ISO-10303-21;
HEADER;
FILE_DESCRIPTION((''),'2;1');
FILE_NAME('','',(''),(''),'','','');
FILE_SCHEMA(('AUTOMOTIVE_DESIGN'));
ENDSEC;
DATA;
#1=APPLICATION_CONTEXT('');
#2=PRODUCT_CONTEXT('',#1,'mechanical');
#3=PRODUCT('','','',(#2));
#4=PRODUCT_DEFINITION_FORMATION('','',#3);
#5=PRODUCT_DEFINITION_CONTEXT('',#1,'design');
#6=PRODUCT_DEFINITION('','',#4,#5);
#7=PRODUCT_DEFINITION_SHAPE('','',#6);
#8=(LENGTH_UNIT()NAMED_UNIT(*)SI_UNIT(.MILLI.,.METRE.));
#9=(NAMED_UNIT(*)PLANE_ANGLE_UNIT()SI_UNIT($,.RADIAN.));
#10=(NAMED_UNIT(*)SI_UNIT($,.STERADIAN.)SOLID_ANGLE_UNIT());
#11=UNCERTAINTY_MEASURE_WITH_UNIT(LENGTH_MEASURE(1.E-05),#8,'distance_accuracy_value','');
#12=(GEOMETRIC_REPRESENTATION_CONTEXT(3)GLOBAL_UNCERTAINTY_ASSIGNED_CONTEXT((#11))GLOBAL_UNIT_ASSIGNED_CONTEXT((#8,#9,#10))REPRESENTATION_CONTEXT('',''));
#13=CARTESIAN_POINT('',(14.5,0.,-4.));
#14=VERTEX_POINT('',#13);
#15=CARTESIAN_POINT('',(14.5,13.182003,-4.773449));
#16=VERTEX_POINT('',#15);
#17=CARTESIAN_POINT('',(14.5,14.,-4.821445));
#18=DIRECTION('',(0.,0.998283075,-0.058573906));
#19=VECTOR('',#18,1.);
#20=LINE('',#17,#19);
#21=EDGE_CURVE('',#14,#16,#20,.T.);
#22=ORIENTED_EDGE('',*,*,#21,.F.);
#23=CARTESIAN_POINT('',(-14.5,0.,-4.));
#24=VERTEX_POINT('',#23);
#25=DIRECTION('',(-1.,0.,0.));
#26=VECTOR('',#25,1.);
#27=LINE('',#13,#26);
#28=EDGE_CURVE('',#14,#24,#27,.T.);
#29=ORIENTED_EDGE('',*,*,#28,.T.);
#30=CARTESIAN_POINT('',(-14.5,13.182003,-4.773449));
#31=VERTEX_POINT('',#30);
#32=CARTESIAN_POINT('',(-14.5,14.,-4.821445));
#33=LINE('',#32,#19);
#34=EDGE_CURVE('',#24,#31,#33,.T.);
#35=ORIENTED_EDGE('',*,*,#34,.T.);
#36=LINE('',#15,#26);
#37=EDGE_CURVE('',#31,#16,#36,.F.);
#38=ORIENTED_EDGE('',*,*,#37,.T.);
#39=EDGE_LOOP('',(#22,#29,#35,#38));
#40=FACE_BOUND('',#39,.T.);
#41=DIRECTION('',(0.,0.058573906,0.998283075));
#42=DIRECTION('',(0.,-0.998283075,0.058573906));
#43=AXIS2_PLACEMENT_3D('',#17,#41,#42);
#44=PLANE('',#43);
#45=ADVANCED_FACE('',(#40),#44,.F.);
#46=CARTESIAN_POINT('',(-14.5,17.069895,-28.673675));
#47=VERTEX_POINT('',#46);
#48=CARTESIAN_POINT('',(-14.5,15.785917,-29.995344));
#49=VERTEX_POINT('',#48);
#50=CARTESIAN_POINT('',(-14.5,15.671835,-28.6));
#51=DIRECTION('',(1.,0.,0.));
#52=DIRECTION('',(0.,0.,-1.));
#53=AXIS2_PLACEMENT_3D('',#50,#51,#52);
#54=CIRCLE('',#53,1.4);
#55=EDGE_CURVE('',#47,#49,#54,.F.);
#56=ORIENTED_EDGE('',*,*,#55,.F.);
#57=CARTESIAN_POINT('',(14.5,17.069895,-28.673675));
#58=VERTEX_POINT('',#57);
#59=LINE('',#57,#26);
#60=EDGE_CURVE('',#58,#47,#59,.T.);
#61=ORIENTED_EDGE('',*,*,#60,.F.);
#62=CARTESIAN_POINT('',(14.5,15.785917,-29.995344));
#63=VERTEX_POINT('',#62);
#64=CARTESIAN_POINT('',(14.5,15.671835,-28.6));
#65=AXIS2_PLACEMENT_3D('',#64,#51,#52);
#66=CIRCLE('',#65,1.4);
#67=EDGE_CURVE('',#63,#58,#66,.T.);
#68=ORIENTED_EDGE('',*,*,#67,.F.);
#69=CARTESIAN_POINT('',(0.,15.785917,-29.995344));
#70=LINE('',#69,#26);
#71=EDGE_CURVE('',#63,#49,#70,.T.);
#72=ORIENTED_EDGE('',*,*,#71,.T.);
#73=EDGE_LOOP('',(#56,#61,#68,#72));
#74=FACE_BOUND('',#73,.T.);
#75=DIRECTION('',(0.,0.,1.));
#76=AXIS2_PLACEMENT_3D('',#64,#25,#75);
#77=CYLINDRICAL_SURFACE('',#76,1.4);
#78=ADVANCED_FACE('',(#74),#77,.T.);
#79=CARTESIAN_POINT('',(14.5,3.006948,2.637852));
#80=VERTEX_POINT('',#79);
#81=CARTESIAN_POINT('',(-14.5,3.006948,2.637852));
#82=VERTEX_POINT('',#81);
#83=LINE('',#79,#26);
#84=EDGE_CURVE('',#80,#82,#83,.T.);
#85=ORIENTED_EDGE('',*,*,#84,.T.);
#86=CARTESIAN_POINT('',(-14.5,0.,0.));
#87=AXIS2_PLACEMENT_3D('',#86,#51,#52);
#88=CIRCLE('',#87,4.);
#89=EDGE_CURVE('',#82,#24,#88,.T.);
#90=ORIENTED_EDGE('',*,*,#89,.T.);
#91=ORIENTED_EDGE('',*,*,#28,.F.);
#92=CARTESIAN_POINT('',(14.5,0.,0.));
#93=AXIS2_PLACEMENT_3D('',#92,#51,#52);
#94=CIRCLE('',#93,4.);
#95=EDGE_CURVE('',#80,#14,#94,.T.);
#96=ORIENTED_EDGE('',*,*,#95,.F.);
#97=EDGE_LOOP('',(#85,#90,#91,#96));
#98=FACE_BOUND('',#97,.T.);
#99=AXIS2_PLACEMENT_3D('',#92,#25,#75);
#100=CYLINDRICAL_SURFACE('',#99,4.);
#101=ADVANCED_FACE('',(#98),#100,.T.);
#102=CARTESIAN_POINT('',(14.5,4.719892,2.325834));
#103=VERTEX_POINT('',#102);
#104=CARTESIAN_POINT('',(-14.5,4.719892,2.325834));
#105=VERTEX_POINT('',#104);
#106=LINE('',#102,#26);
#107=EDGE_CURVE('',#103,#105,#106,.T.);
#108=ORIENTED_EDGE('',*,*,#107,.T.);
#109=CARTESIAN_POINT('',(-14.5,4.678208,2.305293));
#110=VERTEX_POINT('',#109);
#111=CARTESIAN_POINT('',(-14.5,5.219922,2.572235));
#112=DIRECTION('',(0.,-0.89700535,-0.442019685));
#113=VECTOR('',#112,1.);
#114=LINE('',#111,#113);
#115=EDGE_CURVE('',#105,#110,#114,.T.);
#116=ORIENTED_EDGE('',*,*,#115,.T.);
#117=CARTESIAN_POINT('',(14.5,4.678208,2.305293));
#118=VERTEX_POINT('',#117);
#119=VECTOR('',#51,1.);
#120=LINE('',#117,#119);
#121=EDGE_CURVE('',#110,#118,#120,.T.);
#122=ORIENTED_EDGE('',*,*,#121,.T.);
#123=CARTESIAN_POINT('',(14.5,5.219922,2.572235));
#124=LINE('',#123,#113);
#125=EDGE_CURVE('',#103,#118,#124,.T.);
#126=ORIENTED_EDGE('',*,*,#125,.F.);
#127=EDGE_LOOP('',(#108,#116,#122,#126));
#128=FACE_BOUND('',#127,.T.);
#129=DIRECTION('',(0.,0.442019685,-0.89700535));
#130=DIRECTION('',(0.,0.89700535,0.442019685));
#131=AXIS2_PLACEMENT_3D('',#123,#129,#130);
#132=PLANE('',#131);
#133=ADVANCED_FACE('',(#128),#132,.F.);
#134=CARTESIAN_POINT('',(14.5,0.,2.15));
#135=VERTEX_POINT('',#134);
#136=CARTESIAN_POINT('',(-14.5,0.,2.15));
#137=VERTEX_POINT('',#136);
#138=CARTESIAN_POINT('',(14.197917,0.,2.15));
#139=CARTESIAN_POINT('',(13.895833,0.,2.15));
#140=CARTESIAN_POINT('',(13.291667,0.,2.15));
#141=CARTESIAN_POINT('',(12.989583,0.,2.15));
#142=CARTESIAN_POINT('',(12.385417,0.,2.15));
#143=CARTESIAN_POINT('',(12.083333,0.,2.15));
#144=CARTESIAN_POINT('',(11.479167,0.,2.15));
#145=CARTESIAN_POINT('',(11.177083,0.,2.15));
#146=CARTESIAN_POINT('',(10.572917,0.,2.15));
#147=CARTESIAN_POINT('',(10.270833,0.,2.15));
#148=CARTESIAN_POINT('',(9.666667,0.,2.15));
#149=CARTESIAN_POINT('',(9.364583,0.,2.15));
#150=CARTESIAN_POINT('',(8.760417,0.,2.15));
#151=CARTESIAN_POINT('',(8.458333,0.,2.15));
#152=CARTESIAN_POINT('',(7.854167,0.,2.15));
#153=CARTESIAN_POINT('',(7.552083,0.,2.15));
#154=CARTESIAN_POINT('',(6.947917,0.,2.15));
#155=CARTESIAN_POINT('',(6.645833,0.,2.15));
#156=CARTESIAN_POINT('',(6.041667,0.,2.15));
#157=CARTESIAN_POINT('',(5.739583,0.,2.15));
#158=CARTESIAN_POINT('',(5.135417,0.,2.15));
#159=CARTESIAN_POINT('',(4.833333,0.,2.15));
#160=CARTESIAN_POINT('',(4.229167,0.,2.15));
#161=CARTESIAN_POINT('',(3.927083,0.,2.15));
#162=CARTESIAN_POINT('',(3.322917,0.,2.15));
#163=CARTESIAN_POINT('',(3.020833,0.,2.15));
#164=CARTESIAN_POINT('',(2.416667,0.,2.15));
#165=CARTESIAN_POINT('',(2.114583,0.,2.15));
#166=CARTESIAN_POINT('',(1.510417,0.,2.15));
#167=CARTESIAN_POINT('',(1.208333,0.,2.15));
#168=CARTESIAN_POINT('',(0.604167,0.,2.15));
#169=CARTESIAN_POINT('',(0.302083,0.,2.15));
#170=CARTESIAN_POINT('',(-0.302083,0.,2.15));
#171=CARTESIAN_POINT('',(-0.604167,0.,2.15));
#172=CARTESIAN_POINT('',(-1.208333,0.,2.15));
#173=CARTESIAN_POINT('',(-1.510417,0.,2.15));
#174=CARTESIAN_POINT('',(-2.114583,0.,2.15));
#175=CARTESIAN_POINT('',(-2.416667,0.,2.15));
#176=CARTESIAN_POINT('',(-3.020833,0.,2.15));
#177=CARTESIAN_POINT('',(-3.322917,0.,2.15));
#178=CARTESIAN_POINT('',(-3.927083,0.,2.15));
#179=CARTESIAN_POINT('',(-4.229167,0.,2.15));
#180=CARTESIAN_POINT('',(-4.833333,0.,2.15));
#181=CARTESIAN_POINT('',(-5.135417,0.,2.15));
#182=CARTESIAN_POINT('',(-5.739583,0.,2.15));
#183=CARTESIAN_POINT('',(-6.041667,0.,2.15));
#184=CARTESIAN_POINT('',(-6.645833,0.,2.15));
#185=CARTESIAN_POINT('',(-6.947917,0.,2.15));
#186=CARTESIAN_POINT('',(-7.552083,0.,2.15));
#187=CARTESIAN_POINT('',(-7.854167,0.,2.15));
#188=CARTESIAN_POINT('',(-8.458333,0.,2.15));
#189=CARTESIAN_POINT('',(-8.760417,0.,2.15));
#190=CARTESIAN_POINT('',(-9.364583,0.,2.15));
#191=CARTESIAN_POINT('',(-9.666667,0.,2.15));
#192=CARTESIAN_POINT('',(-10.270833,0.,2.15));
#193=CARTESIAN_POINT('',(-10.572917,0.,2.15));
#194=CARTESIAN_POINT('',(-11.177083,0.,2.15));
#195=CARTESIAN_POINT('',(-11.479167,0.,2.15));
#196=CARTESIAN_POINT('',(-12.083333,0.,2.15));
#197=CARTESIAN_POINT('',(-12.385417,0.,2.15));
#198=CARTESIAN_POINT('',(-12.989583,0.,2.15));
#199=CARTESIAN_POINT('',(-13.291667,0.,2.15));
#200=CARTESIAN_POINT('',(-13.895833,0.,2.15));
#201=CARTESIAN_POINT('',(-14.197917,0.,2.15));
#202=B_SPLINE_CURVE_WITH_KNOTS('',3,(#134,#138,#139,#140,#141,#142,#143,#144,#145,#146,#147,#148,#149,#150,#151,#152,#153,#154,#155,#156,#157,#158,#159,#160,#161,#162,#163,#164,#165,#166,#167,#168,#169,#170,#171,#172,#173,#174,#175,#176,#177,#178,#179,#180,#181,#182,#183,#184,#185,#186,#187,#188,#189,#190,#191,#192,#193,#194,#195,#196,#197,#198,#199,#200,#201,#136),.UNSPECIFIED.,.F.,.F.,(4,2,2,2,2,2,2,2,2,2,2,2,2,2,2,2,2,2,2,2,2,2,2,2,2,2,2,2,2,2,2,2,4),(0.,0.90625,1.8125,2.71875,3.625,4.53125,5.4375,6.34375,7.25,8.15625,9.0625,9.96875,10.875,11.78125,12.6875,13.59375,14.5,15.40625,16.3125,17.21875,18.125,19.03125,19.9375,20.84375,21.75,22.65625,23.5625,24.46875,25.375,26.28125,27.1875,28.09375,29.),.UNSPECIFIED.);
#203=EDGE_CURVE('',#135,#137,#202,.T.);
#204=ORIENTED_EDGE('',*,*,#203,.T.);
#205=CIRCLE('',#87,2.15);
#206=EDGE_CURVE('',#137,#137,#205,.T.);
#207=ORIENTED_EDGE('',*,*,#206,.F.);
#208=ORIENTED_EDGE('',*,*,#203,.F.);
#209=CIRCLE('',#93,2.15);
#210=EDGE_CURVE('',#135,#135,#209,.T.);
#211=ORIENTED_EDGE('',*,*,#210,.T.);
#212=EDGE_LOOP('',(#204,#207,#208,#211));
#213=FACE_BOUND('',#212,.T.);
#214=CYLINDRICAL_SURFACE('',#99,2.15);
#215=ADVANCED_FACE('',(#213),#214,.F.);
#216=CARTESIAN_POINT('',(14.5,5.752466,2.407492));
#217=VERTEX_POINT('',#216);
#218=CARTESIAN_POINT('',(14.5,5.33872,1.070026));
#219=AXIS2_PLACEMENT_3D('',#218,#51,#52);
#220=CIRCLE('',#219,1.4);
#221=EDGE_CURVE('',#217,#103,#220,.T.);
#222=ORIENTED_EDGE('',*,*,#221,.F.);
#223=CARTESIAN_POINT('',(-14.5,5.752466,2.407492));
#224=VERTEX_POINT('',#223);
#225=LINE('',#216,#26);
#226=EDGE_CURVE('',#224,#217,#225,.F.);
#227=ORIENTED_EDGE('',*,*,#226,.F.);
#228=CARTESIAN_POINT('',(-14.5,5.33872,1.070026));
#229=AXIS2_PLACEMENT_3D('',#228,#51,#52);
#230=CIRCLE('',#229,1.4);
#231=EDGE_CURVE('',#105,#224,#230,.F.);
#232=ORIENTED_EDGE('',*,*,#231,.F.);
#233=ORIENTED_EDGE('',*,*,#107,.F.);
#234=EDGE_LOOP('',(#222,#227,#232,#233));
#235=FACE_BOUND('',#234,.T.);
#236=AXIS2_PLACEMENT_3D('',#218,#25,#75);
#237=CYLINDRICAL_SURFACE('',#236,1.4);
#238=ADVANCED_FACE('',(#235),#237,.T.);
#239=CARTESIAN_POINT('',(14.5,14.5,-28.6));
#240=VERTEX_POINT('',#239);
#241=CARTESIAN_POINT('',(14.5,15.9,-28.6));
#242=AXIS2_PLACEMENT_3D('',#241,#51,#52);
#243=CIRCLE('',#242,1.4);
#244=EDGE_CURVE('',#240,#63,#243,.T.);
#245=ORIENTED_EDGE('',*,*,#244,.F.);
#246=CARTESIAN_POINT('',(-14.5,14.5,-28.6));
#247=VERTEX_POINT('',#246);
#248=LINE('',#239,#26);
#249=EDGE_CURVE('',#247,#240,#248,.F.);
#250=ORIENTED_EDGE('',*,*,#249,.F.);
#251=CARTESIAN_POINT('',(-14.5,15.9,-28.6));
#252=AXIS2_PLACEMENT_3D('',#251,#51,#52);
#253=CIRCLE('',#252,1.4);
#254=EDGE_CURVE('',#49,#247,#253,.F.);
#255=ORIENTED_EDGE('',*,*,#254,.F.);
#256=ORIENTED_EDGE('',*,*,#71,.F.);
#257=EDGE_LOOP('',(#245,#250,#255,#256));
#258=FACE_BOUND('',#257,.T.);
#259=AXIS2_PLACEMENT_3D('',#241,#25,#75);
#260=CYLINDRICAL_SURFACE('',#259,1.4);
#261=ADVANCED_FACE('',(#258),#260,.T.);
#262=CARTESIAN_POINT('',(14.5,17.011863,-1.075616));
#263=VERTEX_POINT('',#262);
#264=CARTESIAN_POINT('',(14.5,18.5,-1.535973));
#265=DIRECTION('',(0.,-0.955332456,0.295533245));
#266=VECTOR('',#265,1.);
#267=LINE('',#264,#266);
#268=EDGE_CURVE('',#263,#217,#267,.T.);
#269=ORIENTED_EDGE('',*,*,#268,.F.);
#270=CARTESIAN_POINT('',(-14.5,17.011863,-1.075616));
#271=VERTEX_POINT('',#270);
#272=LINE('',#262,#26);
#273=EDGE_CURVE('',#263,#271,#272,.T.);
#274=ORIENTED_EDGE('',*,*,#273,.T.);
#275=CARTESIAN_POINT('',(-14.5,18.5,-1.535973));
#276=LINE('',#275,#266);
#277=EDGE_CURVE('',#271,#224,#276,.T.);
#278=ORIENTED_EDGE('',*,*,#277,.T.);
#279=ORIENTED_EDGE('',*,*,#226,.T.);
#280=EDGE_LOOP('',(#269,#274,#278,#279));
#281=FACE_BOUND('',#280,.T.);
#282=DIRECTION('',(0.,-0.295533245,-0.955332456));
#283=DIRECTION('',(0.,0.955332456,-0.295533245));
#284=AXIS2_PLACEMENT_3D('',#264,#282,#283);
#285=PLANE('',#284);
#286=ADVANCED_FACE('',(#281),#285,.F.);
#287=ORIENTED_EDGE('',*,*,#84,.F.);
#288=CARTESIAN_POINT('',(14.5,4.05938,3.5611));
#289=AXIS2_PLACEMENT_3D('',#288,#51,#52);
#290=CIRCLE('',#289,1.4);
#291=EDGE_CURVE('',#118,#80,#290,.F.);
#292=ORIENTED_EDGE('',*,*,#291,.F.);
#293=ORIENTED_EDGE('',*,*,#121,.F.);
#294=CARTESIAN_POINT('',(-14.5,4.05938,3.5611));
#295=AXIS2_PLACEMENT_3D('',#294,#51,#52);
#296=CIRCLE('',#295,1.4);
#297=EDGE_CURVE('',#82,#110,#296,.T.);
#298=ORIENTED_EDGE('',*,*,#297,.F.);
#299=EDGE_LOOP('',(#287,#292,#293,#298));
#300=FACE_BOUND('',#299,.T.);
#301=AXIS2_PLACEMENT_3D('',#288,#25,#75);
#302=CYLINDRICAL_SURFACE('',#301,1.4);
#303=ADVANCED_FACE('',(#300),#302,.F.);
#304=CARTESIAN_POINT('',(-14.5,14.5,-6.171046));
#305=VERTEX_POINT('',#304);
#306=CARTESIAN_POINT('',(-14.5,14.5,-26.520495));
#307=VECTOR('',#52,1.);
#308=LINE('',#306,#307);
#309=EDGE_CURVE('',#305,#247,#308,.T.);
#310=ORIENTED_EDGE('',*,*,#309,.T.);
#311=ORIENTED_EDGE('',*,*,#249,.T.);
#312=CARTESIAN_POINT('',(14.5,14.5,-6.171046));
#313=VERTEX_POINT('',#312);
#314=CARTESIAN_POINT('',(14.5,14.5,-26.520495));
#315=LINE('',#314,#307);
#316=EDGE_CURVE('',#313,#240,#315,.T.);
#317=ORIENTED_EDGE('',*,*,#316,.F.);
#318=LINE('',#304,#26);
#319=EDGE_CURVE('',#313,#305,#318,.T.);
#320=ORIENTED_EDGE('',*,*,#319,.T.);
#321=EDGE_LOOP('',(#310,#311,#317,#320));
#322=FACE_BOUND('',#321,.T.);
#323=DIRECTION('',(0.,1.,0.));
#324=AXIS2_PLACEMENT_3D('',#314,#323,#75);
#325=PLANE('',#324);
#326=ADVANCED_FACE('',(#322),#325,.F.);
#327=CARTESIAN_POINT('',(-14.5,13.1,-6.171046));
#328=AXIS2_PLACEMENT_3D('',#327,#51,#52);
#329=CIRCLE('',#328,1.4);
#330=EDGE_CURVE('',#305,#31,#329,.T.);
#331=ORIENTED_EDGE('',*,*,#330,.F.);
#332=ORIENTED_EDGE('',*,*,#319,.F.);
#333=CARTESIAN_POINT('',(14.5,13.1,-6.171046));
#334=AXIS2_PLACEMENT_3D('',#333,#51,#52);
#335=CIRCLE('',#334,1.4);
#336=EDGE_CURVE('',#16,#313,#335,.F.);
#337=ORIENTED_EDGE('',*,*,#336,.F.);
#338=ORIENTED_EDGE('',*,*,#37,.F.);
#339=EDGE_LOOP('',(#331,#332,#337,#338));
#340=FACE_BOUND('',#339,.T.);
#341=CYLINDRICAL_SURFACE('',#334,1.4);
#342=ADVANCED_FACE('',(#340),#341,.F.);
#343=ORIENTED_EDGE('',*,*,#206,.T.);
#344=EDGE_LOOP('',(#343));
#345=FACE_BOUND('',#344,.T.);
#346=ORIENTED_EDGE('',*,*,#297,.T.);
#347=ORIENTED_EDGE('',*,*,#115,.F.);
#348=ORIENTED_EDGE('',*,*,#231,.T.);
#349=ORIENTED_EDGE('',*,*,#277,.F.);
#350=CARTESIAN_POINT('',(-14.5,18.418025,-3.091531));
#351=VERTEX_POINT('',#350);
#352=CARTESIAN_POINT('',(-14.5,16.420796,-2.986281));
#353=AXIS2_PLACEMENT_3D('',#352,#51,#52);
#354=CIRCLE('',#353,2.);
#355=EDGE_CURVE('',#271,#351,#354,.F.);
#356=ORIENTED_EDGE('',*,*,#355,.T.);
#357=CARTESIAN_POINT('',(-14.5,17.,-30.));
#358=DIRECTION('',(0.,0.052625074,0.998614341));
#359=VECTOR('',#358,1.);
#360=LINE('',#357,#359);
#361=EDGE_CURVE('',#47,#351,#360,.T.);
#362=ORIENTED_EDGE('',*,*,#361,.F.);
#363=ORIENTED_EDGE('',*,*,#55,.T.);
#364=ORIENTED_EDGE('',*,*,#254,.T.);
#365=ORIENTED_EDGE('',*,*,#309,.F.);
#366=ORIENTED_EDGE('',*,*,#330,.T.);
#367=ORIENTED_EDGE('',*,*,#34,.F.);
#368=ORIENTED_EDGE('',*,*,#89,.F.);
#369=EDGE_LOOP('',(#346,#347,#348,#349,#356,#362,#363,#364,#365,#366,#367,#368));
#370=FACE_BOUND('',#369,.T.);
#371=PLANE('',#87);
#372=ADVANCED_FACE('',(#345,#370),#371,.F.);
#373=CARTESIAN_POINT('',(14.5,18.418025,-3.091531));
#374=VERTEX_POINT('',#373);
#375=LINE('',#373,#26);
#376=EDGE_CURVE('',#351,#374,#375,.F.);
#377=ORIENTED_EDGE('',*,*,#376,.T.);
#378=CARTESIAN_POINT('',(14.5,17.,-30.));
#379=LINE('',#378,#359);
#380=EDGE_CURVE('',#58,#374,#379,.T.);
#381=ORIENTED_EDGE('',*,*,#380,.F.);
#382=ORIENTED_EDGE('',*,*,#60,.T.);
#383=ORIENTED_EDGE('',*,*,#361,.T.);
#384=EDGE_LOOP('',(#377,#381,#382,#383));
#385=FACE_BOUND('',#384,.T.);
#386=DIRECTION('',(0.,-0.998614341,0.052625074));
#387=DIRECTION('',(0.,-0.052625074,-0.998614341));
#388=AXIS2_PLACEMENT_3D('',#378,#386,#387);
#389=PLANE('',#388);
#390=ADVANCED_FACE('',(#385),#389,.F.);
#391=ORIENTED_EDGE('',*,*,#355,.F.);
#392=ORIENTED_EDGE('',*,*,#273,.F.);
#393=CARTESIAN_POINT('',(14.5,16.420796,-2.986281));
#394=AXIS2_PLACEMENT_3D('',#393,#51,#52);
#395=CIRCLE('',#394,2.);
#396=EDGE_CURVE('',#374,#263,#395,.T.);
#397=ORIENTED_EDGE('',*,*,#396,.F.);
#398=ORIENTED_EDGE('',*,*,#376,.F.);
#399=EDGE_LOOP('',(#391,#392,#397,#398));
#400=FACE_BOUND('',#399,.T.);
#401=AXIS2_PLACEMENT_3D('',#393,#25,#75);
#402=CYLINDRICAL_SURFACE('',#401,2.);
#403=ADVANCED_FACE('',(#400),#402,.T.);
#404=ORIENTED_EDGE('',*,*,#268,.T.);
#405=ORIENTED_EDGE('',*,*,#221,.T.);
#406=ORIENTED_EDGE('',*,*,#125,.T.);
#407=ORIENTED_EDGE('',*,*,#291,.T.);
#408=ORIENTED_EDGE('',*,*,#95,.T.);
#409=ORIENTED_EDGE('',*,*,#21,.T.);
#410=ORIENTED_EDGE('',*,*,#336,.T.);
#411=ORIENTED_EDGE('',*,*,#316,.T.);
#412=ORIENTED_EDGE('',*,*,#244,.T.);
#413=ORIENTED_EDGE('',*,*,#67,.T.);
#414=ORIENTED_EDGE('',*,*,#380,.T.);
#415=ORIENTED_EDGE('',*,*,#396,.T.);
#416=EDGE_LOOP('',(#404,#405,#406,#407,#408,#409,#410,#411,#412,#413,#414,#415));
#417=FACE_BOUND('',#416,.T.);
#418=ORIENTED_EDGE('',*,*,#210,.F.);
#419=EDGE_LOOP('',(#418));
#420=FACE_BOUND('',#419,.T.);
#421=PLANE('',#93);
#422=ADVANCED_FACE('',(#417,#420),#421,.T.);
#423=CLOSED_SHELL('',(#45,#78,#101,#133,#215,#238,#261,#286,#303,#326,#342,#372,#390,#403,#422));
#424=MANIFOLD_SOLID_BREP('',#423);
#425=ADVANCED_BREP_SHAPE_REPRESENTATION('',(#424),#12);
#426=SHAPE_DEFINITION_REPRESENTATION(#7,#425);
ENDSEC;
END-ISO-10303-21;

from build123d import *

# Parameters (mm, degrees)
SKETCH1_R           = 2.15
BOSS_EXTRUDE1_DEPTH = 14.5
FILLET1_R           = 2
FILLET2_R           = 1.4


with BuildPart() as part:
    # Sketch1 → Boss-Extrude1 (new, symmetric)
    with BuildSketch(Plane(origin=(0, 0, 0), x_dir=(0, 0, -1), z_dir=(1, 0, 0))):
        with BuildLine():
            Line((1.535973194, 18.500000001), (-2.572234834, 5.219922296))
            Line((-2.572234834, 5.219922296), (-1.768078738, 3.588021398))
            ThreePointArc((-1.768078738, 3.588021398), (-2.112780753, -3.396491935), (3.999999997, 1e-09))
            Line((3.999999997, 1e-09), (4.821445035, 14.000000001))
            Line((4.821445035, 14.000000001), (4.821445035, 14.500000001))
            Line((4.821445035, 14.500000001), (26.520495385, 14.500000001))
            Line((26.520495385, 14.500000001), (30.000000003, 14.500000001))
            Line((30.000000003, 14.500000001), (30.000000003, 17.000000001))
            Line((30.000000003, 17.000000001), (1.535973194, 18.500000001))
        make_face()
        with Locations(Location((0, 0, 0), (0, 0, 180))):
            Circle(SKETCH1_R, mode=Mode.SUBTRACT)
    extrude(amount=BOSS_EXTRUDE1_DEPTH, both=True)

    # Fillet1
    fillet1_edges = [part.edges().sort_by_distance(p)[0] for p in [
        (0, 18.500000001, -1.535973194),
    ]]
    fillet(fillet1_edges, radius=FILLET1_R)

    # Fillet2
    fillet2_edges = [part.edges().sort_by_distance(p)[0] for p in [
        (0, 3.588021398, 1.768078738),
        (0, 14.500000001, -4.821445035),
    ]]
    fillet(fillet2_edges, radius=FILLET2_R)
    # the kernel refuses this fillet: 1.4 mm, written as the material it takes off along each edge
    with BuildSketch(Plane(origin=(-15.893609334, 5.219922296, 2.572234834), x_dir=(0, -0.8970053501938902, -0.442019684769283), z_dir=(1, 0, 0))) as fillet2_2_piece_1:
        with BuildLine():
            CenterArc((FILLET2_R * 0.398174095356, FILLET2_R), FILLET2_R, 226.577668017, 43.422331983)
            Line((-FILLET2_R * 0.289196557818, FILLET2_R * 0.273693188002), (-FILLET2_R * 0.302943970882, FILLET2_R * 0.259167051762))
            Line((-FILLET2_R * 0.302943970882, FILLET2_R * 0.259167051762), (-FILLET2_R * 0.00796348190712, -FILLET2_R * 0.02))
            Line((-FILLET2_R * 0.00796348190712, -FILLET2_R * 0.02), (FILLET2_R * 0.398174095356, -FILLET2_R * 0.02))
            Line((FILLET2_R * 0.398174095356, -FILLET2_R * 0.02), (FILLET2_R * 0.398174095356, 0))
        make_face()
    extrude(amount=31.787218667, mode=Mode.SUBTRACT)
    with BuildSketch(Plane(origin=(17.820413203, 17.000000001, -30.000000003), x_dir=(0, 0.05262507378866547, 0.9986143407786299), z_dir=(-1, 0, 0))) as fillet2_2_piece_2:
        with BuildLine():
            CenterArc((FILLET2_R * 0.948689486547, -FILLET2_R), FILLET2_R, 90, 86.983411926)
            Line((-FILLET2_R * 0.049924854232, -FILLET2_R * 0.947374926211), (-FILLET2_R * 0.0698971410476, -FILLET2_R * 0.946322424736))
            Line((-FILLET2_R * 0.0698971410476, -FILLET2_R * 0.946322424736), (-FILLET2_R * 0.0189737897309, FILLET2_R * 0.02))
            Line((-FILLET2_R * 0.0189737897309, FILLET2_R * 0.02), (FILLET2_R * 0.948689486547, FILLET2_R * 0.02))
            Line((FILLET2_R * 0.948689486547, FILLET2_R * 0.02), (FILLET2_R * 0.948689486547, 0))
        make_face()
    extrude(amount=35.640826406, mode=Mode.SUBTRACT)
    with BuildSketch(Plane(origin=(18, 14.500000001, -30.000000003), x_dir=(0, 1, 0), z_dir=(-1, 0, 0))) as fillet2_2_piece_3:
        with BuildLine():
            CenterArc((FILLET2_R, -FILLET2_R), FILLET2_R, 90, 90)
            Line((0, -FILLET2_R), (-FILLET2_R * 0.02, -FILLET2_R))
            Line((-FILLET2_R * 0.02, -FILLET2_R), (-FILLET2_R * 0.02, FILLET2_R * 0.02))
            Line((-FILLET2_R * 0.02, FILLET2_R * 0.02), (FILLET2_R, FILLET2_R * 0.02))
            Line((FILLET2_R, FILLET2_R * 0.02), (FILLET2_R, 0))
        make_face()
    extrude(amount=36, mode=Mode.SUBTRACT)


solid = part.part
